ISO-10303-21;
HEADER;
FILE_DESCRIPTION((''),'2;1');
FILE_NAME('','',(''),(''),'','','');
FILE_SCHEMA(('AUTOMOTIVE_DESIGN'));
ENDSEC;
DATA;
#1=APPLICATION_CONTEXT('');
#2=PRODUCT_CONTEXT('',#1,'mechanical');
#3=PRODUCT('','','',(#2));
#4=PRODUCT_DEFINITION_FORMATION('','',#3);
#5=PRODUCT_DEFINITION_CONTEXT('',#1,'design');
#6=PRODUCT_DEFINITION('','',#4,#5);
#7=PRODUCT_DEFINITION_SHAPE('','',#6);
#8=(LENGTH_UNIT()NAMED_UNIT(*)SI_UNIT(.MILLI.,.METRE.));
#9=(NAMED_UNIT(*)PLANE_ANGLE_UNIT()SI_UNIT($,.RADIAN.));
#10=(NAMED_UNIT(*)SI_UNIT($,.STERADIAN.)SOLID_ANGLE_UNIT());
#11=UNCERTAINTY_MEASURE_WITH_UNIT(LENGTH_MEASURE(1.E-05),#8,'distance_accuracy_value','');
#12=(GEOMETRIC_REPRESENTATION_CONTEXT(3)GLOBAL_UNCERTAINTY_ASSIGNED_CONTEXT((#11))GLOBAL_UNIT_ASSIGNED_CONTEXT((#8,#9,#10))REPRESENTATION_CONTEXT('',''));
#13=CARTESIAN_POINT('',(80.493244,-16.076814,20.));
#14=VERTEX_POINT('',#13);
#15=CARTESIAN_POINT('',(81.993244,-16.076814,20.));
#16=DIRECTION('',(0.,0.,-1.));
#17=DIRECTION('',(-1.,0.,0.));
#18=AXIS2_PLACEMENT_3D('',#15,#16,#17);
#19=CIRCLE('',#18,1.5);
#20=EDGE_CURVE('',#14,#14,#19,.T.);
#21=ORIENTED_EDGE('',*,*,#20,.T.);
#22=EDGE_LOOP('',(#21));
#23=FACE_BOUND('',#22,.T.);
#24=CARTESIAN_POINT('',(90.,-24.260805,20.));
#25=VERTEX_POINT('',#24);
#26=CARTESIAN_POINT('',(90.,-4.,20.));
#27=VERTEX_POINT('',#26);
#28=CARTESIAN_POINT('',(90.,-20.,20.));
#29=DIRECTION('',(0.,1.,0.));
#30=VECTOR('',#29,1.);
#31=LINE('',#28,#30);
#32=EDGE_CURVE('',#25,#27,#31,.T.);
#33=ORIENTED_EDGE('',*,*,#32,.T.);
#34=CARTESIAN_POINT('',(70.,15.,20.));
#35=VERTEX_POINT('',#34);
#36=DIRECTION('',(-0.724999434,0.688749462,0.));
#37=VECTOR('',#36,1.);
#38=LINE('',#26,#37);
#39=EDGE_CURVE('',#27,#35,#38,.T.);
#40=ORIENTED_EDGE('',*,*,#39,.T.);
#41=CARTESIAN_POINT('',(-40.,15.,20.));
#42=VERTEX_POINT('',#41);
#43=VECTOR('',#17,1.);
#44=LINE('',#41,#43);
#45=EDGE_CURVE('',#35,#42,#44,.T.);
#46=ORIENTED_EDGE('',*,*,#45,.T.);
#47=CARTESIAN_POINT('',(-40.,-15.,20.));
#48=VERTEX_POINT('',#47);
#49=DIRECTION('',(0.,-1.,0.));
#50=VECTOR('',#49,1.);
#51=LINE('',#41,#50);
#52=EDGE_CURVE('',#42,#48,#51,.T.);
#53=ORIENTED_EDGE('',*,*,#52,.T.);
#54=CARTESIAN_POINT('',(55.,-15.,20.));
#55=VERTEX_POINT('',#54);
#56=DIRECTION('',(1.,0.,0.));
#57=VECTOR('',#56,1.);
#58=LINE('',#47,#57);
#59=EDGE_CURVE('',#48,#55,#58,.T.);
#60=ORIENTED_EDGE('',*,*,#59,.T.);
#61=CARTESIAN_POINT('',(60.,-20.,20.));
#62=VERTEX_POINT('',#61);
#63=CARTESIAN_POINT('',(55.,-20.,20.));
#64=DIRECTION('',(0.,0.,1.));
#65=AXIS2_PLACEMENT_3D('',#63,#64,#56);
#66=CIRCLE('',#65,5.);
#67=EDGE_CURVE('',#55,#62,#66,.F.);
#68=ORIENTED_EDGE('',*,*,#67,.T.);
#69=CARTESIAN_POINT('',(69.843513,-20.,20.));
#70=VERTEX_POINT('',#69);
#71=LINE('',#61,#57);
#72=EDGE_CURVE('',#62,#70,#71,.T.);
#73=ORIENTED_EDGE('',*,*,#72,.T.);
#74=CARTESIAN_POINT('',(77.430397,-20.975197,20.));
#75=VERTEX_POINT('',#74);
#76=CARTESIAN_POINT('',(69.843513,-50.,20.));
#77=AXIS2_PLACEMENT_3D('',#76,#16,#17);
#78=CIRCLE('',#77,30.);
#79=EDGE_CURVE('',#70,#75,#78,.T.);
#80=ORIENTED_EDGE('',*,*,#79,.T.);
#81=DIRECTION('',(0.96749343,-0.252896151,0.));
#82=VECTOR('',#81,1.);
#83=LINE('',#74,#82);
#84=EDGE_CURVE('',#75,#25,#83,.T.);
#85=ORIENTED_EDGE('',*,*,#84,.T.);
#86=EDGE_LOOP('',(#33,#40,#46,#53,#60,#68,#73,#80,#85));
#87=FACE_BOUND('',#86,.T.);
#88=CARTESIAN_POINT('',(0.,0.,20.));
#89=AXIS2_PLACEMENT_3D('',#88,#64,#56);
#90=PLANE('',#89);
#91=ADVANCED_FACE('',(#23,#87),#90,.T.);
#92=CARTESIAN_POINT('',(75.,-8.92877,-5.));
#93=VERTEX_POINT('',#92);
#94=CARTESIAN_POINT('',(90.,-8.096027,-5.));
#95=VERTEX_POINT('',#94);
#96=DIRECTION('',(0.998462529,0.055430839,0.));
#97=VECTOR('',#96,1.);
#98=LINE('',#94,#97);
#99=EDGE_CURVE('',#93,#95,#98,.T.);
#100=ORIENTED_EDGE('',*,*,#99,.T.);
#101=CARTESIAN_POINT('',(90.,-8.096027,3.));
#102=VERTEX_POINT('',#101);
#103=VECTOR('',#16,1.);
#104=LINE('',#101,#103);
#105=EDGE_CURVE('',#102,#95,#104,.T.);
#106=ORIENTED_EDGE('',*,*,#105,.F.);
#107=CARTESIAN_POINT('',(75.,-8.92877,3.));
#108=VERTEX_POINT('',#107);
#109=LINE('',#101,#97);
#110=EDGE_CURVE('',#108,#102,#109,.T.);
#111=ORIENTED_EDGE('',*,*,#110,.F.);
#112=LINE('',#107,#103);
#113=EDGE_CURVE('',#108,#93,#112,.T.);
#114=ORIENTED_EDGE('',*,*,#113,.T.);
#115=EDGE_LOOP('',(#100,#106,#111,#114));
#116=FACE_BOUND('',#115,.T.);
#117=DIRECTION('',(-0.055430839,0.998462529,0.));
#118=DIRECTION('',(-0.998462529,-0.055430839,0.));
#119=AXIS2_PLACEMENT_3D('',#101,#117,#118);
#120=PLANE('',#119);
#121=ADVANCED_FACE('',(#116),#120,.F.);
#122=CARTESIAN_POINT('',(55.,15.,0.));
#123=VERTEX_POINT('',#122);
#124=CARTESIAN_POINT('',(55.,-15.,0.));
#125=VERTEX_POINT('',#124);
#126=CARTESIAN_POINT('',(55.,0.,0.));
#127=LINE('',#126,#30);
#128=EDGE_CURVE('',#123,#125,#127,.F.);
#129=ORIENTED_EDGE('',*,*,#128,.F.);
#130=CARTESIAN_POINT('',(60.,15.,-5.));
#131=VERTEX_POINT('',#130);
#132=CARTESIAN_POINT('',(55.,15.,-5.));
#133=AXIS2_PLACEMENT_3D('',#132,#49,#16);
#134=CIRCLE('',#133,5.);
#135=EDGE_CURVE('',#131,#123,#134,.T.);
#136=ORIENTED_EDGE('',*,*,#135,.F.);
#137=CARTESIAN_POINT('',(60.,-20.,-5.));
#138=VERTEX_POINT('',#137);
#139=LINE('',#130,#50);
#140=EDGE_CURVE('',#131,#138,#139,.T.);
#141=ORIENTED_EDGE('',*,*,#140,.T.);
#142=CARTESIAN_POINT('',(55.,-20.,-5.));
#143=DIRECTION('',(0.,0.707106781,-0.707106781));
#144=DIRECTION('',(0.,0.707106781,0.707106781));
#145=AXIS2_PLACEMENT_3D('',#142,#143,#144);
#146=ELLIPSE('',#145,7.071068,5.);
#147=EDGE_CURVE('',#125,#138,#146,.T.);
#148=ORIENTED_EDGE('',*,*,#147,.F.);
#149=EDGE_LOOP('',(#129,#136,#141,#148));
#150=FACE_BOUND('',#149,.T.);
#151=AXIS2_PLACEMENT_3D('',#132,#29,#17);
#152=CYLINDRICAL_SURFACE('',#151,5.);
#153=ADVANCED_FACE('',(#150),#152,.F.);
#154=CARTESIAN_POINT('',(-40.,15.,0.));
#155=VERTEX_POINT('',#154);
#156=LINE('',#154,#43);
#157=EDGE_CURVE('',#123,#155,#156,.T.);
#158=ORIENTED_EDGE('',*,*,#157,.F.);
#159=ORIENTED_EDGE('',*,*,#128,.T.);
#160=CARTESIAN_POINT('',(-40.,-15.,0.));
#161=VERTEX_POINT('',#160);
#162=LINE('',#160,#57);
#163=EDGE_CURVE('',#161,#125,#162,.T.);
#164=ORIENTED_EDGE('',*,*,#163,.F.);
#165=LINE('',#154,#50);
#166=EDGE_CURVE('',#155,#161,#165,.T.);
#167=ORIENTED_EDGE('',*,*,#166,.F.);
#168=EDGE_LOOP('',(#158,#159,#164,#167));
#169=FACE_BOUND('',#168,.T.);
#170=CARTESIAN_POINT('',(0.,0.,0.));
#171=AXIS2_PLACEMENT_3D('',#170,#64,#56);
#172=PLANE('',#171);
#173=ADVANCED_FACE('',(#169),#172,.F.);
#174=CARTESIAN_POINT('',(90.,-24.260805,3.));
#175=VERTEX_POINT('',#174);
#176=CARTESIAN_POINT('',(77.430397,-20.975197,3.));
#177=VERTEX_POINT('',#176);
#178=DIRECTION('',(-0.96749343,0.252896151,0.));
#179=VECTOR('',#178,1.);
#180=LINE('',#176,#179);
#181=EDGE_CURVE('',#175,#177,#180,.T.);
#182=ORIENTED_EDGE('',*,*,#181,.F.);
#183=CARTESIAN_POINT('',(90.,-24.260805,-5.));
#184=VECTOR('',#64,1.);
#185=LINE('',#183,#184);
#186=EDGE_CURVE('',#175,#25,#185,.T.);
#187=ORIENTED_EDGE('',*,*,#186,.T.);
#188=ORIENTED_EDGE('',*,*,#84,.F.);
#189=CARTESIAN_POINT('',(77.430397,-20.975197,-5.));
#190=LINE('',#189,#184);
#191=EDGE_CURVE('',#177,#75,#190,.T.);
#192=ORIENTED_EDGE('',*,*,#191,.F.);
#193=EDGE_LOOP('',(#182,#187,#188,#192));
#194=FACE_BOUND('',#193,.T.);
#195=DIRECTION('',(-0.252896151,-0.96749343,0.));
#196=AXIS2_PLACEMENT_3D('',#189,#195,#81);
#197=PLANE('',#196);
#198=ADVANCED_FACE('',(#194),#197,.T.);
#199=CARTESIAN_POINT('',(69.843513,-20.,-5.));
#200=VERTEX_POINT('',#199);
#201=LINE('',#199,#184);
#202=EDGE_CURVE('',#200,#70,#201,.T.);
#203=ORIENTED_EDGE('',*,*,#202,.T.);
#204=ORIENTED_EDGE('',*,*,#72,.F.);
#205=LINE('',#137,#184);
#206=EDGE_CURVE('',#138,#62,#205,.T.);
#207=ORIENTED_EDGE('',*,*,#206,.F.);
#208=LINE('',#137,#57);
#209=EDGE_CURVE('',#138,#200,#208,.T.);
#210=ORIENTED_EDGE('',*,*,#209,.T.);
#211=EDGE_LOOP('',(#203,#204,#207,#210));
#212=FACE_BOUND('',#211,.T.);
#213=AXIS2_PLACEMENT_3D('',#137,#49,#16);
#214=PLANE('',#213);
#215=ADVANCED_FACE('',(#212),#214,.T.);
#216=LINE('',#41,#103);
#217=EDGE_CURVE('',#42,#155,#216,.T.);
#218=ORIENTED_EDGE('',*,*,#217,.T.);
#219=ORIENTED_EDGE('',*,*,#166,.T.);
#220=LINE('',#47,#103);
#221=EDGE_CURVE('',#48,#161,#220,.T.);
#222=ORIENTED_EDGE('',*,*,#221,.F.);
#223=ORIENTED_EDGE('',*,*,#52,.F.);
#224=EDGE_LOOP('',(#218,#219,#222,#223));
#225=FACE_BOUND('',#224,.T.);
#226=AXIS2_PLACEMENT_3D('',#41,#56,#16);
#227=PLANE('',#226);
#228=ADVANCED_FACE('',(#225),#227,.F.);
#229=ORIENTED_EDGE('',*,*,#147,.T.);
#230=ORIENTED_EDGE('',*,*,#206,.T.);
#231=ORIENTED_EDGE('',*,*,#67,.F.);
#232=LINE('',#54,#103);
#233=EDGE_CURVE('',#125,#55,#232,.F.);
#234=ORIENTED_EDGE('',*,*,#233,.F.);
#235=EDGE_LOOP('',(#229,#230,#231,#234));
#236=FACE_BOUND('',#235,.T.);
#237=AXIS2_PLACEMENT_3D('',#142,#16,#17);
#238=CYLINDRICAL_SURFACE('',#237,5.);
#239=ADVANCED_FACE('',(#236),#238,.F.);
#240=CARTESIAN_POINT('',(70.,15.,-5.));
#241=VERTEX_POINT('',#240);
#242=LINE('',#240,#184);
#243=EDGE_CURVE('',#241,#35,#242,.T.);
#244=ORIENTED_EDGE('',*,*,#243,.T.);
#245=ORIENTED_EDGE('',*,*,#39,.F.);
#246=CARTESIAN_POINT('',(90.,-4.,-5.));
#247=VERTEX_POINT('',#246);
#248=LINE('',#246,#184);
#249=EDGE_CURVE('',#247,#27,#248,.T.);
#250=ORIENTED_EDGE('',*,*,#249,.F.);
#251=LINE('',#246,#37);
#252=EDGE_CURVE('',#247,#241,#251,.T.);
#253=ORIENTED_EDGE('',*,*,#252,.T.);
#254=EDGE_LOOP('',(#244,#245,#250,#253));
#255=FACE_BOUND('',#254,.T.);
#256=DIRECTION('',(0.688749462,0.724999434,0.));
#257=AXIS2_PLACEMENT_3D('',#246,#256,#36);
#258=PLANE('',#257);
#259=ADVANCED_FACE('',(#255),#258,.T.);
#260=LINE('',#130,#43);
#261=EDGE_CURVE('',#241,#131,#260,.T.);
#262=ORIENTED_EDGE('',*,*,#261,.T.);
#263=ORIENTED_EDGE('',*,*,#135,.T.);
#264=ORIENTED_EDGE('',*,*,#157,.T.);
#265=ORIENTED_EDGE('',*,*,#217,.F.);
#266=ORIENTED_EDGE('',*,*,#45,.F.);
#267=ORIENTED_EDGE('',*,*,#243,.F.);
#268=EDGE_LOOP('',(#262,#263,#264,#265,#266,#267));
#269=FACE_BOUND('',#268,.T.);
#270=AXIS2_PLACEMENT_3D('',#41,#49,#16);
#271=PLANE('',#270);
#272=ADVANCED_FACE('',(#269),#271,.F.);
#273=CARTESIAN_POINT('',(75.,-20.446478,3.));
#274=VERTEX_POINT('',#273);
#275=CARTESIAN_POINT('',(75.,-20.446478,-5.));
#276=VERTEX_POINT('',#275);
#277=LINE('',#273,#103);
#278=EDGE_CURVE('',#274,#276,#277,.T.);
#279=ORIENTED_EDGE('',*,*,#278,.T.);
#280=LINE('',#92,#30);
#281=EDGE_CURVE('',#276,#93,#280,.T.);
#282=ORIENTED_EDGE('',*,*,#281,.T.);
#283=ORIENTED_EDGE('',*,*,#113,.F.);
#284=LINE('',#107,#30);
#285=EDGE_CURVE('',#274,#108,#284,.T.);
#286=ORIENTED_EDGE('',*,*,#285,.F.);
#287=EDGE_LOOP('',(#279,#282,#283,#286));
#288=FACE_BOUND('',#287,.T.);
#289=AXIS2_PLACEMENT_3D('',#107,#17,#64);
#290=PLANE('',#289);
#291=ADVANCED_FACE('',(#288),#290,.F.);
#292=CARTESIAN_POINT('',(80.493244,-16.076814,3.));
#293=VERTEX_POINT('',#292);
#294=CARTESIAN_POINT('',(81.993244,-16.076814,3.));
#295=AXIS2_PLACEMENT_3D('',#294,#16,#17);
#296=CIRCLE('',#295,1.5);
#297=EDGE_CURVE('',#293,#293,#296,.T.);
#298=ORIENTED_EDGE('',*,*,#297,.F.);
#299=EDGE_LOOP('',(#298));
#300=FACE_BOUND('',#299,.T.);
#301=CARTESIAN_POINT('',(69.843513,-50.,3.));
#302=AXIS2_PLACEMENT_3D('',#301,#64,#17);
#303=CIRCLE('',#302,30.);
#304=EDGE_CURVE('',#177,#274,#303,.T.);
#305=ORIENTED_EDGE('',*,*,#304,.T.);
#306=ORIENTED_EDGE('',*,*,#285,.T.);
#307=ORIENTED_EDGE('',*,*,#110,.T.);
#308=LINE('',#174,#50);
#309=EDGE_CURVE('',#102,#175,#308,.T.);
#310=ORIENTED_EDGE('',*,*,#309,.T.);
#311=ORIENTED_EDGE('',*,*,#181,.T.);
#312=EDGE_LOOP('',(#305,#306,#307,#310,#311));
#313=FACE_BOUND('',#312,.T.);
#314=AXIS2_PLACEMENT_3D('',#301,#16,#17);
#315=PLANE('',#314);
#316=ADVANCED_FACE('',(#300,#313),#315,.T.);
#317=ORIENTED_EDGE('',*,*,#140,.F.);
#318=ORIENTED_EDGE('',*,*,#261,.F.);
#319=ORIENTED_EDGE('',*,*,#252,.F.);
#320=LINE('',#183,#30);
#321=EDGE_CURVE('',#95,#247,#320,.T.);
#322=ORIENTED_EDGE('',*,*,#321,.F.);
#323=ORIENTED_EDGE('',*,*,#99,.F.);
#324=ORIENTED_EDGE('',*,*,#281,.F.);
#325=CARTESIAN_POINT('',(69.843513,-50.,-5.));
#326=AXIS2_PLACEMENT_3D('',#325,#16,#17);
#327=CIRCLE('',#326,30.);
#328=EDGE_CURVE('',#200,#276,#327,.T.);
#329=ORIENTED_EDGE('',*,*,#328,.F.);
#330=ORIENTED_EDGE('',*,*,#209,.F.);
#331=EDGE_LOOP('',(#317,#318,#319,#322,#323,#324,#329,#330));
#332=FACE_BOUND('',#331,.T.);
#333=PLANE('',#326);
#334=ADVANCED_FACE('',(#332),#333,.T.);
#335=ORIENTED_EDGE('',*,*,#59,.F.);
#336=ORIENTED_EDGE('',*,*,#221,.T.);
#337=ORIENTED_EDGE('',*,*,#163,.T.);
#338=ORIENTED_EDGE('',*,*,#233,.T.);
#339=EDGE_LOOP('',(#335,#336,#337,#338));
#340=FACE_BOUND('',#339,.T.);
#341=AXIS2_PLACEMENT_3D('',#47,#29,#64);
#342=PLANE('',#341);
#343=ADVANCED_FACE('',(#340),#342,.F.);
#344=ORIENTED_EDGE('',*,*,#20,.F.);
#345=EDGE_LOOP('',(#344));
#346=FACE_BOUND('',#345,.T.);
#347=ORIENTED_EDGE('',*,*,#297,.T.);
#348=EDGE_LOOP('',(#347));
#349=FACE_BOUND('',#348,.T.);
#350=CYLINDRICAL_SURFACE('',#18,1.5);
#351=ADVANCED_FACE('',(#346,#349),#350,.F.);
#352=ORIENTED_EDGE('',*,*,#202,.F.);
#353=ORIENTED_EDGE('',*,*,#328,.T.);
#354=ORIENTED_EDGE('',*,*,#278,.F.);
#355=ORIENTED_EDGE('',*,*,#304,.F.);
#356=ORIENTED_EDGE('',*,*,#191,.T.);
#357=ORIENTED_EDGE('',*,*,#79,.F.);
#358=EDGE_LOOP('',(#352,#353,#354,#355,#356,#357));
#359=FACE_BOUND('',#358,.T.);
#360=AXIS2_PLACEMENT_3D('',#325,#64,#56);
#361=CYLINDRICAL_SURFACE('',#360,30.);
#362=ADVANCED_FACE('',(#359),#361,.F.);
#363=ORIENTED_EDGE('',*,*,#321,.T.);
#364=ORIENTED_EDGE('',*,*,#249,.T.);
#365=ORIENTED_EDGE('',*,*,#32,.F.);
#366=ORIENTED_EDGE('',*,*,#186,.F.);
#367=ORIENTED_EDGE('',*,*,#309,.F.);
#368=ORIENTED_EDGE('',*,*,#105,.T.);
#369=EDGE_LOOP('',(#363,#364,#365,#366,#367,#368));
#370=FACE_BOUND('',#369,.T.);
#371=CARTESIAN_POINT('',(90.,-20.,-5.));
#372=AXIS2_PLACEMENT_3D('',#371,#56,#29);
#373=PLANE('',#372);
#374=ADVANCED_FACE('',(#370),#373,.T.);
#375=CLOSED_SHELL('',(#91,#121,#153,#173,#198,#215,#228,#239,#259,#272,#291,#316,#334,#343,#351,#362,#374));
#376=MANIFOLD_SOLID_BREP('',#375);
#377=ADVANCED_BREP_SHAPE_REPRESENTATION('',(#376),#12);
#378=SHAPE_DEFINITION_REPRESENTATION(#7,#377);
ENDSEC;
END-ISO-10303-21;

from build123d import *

# Parameters (mm, degrees)
SKETCH_1_W          = 100
SKETCH_1_H          = 30
EXTRUDE_1_DEPTH     = 20
EXTRUDE_2_DEPTH     = 25
FILLET_2_R          = 5
CUT_EXTRUDE_START   = -8
CUT_EXTRUDE_1_DEPTH = 8
SKETCH_5_R          = 1.5
CUT_EXTRUDE_2_DEPTH = 95.750127505


with BuildPart() as part:
    # 草图1 → 凸台-拉伸1 (new body)
    with BuildSketch(Plane.XY):
        with Locations((10, 0)):
            Rectangle(SKETCH_1_W, SKETCH_1_H)
    extrude(amount=EXTRUDE_1_DEPTH)

    # 草图2 → 凸台-拉伸2 (add)
    with BuildSketch(Plane.XY.offset(20)):
        with BuildLine():
            Line((60, 15), (70, 15))
            Line((70, 15), (90, -4))
            Line((90, -4), (90, -20))
            Line((90, -20), (90, -24.260805059))
            Line((90, -24.260805059), (77.430397402, -20.975197102))
            ThreePointArc((77.430397402, -20.975197102), (73.668164046, -20.244798043), (69.843512882, -20))
            Line((69.843512882, -20), (60, -20))
            Line((60, -20), (60, 15))
        make_face()
    extrude(amount=-EXTRUDE_2_DEPTH)

    # 圆角2
    fillet_2_edges = [part.edges().sort_by_distance(p)[0] for p in [
        (60, -15, 10),
        (60, 0, 0),
    ]]
    fillet(fillet_2_edges, radius=FILLET_2_R - 0.0001)  # a hair under: the kernel refuses the full size

    # 草图4 → 切除-拉伸1 (cut)
    with BuildSketch(Plane(origin=(0, 0, -5), x_dir=(-1, 0, 0), z_dir=(0, 0, -1)).offset(CUT_EXTRUDE_START)):
        with BuildLine():
            Line((-90, -8.096027328), (-75, -8.928770232))
            Line((-75, -8.928770232), (-75, -20.446478372))
            ThreePointArc((-75, -20.446478372), (-76.220680439, -20.685639459), (-77.430397402, -20.975197102))
            Line((-77.430397402, -20.975197102), (-90, -24.260805059))
            Line((-90, -24.260805059), (-90, -8.096027328))
        make_face()
    extrude(amount=CUT_EXTRUDE_1_DEPTH, mode=Mode.SUBTRACT)

    # 草图5 → 切除-拉伸2 (cut, through all)
    with BuildSketch(Plane(origin=(0, 0, 3), x_dir=(-1, 0, 0), z_dir=(0, 0, -1))):
        with Locations((-81.993244167, -16.076814441)):
            Circle(SKETCH_5_R)
    extrude(amount=-CUT_EXTRUDE_2_DEPTH, mode=Mode.SUBTRACT)


solid = part.part
